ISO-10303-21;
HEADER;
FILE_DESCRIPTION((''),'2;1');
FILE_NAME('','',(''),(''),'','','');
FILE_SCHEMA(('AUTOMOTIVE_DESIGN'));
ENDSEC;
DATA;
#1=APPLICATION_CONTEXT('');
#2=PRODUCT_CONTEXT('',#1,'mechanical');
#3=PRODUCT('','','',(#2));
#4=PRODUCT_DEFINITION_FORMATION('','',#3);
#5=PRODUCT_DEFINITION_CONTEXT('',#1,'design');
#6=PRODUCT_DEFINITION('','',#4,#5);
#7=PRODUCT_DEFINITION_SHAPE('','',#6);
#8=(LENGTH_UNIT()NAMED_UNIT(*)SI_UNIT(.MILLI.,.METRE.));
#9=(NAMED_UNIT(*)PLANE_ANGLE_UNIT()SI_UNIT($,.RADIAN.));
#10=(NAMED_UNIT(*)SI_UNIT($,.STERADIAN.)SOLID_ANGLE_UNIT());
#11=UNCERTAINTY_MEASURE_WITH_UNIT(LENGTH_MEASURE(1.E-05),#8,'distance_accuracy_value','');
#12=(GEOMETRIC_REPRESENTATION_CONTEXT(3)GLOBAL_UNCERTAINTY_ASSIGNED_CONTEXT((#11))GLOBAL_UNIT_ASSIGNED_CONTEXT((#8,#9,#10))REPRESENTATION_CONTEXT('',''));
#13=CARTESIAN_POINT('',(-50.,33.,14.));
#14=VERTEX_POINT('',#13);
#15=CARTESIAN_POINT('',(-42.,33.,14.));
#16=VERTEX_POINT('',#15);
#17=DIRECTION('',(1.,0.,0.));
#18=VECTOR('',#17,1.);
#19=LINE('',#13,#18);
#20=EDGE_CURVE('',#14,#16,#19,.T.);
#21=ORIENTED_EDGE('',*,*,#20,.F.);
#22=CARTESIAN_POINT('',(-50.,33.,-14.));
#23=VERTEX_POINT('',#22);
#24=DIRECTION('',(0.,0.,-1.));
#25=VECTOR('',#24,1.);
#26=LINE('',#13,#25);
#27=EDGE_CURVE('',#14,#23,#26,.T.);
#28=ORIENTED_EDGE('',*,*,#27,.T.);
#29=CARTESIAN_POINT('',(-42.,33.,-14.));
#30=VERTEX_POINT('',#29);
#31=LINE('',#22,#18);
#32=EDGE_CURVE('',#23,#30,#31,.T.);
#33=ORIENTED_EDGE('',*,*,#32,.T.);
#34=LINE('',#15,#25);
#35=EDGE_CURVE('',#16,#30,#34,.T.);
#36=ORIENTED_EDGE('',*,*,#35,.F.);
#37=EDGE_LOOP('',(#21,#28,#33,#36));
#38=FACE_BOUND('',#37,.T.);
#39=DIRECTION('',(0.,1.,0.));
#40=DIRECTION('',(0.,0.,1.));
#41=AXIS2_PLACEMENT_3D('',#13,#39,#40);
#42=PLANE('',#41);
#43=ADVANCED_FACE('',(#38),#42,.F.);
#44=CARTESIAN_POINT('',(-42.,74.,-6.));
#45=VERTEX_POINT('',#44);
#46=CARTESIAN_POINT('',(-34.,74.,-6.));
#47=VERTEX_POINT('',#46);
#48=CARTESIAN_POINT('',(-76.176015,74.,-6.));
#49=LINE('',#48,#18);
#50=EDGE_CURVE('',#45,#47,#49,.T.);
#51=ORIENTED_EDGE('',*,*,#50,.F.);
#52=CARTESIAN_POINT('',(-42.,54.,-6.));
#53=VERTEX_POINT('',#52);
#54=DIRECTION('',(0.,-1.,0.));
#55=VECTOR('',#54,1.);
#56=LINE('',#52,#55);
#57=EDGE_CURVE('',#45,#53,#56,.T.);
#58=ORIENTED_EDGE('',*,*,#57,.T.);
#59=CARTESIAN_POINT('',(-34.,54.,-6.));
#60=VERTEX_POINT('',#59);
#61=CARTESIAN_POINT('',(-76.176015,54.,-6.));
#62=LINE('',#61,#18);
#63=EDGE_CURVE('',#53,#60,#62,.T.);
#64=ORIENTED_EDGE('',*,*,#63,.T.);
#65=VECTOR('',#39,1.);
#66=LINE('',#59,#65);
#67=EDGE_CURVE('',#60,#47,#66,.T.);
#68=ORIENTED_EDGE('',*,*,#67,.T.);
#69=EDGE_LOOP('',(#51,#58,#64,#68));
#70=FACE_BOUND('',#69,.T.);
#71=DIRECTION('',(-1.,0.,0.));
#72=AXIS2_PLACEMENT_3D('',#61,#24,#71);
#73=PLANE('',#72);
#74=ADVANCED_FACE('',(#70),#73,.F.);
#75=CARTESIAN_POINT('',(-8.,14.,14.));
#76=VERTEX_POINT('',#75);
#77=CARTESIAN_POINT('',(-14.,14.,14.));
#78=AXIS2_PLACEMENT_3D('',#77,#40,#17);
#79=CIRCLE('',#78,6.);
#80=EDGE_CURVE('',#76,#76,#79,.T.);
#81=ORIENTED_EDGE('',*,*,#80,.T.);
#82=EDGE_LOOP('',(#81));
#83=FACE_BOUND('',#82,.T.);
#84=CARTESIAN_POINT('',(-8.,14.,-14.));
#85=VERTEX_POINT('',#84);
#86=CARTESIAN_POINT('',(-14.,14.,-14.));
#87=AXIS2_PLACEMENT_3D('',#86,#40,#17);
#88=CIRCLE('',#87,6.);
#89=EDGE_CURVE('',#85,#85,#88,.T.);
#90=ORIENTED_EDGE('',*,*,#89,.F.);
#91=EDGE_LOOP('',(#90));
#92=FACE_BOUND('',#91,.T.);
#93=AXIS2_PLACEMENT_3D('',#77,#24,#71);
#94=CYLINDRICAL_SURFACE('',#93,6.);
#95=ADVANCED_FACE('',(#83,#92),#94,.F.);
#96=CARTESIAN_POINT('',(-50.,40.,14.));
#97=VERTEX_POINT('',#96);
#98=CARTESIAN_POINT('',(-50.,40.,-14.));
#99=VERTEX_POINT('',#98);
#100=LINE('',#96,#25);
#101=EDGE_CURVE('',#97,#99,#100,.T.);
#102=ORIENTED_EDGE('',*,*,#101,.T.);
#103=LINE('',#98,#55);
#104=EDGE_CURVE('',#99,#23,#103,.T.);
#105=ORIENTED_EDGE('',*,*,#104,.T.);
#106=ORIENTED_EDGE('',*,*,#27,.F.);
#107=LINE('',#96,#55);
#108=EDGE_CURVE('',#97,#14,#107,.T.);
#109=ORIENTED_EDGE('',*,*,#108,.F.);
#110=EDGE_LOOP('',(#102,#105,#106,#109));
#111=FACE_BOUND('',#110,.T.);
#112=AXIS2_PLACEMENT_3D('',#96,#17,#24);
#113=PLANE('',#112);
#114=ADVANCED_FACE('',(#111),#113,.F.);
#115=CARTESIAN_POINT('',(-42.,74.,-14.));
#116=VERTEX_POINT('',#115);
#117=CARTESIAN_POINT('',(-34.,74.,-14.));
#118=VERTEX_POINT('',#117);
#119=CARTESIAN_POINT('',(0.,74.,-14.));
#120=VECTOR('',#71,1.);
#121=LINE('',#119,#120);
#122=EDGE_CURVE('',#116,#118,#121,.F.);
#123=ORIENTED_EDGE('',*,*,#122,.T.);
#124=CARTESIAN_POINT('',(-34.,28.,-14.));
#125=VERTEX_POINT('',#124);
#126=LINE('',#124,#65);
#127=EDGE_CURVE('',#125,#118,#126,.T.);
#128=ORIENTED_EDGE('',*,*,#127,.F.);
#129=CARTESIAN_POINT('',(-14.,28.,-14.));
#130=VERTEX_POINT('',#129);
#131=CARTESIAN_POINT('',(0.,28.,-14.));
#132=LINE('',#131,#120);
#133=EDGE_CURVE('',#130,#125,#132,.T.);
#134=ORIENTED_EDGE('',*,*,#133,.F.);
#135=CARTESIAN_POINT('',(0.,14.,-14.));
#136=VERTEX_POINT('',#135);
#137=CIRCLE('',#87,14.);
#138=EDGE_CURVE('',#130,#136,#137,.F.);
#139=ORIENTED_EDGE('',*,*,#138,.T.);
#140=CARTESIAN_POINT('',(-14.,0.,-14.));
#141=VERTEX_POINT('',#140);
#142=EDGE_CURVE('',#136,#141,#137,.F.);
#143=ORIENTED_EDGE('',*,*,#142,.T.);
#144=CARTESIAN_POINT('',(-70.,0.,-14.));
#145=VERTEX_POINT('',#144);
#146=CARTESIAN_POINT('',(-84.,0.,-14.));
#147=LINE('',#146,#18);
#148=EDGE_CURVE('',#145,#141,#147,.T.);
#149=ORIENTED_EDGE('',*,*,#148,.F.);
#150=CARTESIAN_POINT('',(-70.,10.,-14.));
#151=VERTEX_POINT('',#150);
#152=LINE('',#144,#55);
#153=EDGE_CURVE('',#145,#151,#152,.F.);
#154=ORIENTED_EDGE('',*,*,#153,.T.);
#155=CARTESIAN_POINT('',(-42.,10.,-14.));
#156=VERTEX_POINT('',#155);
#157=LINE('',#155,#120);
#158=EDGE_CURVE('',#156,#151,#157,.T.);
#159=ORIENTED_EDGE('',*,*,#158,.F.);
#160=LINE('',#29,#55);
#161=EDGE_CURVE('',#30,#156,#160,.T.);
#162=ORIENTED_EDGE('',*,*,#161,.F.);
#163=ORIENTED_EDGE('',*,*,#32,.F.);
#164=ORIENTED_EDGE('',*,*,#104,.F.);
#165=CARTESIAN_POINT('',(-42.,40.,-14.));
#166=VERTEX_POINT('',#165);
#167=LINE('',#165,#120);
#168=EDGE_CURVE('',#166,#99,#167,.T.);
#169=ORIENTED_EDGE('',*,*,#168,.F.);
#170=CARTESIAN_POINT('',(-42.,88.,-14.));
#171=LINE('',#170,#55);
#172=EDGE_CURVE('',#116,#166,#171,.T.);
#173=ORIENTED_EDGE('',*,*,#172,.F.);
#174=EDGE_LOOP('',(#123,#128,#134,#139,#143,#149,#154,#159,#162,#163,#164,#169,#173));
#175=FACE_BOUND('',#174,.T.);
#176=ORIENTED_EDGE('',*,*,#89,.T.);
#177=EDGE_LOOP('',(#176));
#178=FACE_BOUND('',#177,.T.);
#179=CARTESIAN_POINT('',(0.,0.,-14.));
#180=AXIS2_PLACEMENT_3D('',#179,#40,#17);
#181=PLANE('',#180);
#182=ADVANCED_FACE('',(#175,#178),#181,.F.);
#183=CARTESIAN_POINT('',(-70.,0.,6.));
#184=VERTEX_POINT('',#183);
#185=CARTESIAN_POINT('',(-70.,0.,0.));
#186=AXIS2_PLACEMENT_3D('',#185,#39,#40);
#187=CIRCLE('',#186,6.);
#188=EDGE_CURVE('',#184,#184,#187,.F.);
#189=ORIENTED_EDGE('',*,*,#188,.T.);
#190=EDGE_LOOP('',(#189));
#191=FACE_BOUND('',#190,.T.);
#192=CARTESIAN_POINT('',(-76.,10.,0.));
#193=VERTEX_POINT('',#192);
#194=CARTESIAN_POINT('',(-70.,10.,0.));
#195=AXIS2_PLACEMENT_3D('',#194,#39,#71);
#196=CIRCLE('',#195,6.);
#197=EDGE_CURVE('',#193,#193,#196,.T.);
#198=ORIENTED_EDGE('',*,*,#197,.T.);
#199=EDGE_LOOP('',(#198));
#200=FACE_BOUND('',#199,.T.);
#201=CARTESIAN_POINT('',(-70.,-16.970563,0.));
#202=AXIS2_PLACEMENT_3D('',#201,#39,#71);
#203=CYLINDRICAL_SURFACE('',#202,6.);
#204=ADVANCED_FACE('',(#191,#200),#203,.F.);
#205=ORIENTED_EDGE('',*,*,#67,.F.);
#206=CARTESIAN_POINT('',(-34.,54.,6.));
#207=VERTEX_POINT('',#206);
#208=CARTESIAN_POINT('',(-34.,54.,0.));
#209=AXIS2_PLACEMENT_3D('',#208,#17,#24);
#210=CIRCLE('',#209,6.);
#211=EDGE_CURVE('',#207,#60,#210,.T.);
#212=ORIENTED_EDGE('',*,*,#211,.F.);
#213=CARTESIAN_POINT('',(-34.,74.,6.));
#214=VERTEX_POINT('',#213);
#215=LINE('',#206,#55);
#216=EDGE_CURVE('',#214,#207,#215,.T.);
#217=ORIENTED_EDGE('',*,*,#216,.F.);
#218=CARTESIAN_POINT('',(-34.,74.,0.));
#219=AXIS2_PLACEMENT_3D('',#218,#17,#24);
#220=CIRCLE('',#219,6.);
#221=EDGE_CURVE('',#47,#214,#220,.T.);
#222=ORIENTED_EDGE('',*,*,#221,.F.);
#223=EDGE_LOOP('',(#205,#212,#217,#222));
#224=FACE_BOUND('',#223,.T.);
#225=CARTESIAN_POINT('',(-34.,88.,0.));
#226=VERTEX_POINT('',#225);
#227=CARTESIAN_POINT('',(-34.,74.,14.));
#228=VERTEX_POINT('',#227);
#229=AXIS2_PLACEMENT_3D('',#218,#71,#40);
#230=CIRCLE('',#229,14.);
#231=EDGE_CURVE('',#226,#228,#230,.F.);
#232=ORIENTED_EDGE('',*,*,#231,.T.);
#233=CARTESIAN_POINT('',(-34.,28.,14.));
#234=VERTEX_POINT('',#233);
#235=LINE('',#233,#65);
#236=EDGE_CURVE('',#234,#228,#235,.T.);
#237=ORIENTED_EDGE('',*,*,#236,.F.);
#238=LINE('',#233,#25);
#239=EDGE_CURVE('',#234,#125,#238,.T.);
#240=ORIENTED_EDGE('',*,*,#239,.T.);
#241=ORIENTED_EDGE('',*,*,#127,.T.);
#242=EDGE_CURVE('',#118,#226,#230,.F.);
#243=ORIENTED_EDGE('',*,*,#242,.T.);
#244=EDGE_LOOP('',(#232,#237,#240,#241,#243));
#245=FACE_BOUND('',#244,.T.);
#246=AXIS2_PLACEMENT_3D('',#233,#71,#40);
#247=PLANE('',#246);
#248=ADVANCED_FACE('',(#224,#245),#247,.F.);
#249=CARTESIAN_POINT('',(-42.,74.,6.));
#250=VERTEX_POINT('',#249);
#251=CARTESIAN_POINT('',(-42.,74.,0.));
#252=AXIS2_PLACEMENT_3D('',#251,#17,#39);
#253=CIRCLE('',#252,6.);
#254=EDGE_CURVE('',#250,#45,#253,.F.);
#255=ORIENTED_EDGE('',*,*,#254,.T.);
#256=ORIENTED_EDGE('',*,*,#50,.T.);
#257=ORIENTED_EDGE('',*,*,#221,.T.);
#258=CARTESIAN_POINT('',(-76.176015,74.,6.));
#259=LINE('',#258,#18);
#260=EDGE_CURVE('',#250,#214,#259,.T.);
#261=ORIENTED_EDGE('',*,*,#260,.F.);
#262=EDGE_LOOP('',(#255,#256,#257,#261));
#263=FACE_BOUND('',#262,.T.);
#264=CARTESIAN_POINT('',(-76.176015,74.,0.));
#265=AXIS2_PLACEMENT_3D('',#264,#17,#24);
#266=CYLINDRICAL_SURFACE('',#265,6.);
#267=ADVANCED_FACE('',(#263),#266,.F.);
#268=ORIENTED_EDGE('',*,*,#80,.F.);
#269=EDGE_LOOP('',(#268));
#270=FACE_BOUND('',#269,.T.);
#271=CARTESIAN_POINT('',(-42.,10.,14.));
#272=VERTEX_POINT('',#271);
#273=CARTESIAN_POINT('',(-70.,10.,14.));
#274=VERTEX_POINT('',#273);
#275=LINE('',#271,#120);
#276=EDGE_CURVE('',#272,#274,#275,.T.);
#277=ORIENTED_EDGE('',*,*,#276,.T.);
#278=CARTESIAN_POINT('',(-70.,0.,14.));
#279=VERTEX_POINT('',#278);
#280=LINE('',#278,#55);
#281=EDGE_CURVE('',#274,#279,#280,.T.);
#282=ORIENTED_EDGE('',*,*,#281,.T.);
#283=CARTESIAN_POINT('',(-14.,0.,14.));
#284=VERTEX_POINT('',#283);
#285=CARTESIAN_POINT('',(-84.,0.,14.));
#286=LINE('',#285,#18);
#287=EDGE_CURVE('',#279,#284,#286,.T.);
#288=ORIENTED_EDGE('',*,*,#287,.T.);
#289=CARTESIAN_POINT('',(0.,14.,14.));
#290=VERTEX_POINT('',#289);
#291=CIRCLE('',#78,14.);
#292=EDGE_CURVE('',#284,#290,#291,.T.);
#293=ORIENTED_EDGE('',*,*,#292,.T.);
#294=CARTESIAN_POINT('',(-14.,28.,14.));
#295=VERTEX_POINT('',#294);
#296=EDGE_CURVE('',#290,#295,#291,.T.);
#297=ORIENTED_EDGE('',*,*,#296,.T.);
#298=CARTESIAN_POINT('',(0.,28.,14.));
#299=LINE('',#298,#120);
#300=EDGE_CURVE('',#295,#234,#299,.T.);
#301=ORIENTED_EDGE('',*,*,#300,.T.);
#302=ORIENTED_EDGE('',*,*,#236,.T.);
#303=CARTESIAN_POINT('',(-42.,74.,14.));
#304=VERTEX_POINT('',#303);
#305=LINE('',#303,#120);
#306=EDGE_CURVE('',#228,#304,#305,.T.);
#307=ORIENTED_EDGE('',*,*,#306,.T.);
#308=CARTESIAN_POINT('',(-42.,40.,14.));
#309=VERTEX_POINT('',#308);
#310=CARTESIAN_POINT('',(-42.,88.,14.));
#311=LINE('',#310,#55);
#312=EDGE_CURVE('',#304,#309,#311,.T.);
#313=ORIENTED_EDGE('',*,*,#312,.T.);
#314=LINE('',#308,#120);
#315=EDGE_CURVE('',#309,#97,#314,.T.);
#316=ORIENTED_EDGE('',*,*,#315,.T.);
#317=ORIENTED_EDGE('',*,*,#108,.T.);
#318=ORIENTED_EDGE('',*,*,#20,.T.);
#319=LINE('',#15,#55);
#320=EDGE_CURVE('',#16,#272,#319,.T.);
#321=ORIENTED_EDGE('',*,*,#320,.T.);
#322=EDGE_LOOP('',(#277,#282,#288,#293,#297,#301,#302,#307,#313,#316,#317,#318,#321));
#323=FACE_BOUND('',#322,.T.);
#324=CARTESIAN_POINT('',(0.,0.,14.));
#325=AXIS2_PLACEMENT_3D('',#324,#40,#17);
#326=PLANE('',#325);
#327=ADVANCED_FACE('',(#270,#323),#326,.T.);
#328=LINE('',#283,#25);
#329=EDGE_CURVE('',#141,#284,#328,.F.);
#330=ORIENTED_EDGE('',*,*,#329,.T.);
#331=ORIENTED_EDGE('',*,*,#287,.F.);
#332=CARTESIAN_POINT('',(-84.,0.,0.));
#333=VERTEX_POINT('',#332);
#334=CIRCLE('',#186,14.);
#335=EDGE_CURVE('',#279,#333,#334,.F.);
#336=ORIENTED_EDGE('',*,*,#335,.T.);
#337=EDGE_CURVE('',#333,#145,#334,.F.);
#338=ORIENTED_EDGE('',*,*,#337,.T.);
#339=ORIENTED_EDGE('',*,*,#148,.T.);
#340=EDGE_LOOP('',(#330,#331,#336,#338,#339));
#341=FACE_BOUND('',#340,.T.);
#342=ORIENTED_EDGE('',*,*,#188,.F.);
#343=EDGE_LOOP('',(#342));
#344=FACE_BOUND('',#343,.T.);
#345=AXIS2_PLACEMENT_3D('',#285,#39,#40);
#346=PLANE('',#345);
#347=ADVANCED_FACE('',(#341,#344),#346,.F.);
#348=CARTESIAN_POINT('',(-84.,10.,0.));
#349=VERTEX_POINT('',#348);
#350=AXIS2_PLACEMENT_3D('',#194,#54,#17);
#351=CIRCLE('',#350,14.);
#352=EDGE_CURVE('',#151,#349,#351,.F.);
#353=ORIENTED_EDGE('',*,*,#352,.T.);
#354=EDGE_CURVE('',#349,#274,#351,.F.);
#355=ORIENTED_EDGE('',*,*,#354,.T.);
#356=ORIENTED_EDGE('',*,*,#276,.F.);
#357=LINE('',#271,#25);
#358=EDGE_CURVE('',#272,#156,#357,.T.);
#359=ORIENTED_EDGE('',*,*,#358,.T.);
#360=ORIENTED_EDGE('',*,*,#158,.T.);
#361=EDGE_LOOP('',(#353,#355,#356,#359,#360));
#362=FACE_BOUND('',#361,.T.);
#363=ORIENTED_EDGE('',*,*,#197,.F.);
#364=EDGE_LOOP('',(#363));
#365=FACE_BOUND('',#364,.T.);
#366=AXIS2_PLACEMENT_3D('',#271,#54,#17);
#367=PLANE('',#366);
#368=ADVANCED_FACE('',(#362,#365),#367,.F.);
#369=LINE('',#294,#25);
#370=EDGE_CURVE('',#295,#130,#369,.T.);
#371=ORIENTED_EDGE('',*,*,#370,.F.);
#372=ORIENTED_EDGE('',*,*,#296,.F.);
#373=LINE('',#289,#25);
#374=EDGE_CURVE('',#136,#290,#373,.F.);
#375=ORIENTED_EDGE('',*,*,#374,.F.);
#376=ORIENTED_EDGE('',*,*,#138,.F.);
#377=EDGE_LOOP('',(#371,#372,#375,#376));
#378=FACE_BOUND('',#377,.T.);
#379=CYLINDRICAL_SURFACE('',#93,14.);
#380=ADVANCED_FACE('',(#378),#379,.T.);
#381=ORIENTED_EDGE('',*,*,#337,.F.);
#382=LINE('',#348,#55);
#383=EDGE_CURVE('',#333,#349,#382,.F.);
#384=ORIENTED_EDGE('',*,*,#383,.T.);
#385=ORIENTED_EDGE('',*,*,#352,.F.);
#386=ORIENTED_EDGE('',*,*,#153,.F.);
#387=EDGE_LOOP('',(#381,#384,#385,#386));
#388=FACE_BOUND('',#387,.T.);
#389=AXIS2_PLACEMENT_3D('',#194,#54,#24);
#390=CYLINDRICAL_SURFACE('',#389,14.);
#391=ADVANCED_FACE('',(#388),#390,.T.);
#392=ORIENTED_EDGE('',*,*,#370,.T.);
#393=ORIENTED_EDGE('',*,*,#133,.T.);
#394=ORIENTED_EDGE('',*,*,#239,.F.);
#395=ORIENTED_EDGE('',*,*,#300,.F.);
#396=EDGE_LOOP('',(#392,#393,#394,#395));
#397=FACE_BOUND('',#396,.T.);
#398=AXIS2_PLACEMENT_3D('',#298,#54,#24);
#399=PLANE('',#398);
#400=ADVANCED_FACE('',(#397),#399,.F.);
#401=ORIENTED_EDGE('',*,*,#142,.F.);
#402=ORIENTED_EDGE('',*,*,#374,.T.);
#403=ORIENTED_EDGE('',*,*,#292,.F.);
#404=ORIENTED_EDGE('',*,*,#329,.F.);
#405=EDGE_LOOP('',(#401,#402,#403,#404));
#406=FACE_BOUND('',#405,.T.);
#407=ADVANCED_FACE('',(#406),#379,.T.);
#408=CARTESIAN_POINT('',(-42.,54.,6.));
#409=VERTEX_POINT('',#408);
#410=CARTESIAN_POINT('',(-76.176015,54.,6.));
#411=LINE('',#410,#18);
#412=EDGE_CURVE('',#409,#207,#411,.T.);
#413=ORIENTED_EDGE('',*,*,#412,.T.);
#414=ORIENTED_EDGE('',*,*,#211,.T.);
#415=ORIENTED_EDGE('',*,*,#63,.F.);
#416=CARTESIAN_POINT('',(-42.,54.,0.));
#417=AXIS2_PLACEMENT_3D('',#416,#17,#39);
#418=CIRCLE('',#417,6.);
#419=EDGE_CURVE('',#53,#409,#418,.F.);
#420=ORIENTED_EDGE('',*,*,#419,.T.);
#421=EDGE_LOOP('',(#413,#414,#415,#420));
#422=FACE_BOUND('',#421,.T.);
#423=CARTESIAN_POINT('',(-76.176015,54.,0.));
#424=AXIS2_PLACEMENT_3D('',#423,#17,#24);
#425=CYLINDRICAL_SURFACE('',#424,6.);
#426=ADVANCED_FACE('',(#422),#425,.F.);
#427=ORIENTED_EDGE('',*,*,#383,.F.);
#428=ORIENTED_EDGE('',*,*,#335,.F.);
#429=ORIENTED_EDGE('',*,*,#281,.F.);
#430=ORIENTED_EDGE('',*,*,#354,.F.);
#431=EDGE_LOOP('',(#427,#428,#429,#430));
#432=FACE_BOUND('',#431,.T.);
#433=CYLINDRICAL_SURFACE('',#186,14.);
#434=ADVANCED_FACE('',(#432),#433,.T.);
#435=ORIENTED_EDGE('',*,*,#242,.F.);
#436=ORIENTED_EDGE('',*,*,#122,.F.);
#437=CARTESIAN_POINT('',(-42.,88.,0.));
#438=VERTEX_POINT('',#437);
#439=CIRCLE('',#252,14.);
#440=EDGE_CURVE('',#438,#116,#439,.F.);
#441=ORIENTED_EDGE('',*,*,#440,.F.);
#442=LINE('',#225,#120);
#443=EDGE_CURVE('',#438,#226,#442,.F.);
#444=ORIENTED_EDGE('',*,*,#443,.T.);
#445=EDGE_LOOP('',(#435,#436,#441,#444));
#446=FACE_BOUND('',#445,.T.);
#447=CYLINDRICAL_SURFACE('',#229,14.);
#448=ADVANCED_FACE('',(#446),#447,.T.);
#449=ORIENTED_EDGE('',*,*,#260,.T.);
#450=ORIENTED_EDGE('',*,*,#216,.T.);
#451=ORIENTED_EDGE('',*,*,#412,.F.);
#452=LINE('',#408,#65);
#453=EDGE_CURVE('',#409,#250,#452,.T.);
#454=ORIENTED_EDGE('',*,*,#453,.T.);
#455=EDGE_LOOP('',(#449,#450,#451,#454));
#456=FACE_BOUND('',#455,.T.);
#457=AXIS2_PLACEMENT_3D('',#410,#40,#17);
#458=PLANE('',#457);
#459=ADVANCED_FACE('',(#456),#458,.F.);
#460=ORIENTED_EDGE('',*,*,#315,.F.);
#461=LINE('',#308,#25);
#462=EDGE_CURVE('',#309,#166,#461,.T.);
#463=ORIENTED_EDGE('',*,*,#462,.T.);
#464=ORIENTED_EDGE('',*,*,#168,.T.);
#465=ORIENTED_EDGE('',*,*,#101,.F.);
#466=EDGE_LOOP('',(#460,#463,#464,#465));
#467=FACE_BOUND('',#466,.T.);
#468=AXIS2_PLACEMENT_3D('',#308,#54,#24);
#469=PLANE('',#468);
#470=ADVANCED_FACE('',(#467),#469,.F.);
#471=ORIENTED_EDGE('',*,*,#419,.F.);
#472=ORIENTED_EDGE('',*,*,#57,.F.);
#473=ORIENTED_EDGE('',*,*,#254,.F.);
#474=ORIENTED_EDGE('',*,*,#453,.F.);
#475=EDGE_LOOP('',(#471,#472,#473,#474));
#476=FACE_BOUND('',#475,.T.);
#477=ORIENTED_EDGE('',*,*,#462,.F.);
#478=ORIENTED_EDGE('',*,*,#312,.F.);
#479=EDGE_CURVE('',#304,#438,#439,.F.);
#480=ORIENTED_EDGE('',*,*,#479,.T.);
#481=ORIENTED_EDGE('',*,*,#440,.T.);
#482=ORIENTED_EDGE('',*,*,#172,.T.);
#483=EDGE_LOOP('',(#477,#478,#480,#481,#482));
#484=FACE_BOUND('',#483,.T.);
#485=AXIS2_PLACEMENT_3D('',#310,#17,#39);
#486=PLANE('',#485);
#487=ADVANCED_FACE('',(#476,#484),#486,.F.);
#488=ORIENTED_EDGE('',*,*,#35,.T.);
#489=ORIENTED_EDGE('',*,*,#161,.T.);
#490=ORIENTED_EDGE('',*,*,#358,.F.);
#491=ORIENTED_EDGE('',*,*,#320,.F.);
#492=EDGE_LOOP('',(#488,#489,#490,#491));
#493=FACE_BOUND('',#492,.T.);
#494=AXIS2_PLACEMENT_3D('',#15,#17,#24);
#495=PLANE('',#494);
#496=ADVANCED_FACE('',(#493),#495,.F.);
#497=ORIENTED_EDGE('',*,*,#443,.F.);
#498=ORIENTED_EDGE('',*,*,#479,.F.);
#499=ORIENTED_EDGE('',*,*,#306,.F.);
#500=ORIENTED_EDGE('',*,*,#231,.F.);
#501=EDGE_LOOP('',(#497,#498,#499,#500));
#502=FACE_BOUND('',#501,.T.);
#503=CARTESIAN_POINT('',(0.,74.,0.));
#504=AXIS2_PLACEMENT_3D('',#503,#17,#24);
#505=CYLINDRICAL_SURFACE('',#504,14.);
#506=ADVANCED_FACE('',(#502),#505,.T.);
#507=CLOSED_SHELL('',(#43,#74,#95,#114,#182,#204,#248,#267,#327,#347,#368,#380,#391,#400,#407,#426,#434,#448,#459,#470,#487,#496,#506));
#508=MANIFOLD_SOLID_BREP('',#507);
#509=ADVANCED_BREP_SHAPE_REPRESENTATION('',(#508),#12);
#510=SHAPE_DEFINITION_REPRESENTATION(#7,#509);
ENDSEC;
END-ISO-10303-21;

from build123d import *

# Parameters (mm, degrees)
SKETCH2_R           = 6
BOSS_EXTRUDE1_DEPTH = 14
CUT_EXTRUDE1_DEPTH  = 8
SKETCH4_R           = 6
CUT_EXTRUDE2_DEPTH  = 10
FILLET1_R           = 14


with BuildPart() as part:
    # Sketch2 → Boss-Extrude1 (new, symmetric)
    with BuildSketch(Plane.XY):
        Polygon((0, 0), (0, 28), (-34, 28), (-34, 88), (-42, 88), (-42, 40), (-50, 40), (-50, 33), (-42, 33), (-42, 10), (-84, 10), (-84, 0), align=None)
        with Locations((-14, 14)):
            Circle(SKETCH2_R, mode=Mode.SUBTRACT)
    extrude(amount=BOSS_EXTRUDE1_DEPTH, both=True)

    # Sketch3 → Cut-Extrude1 (cut)
    with BuildSketch(Plane(origin=(-34, 0, 0), x_dir=(0, 0, -1), z_dir=(1, 0, 0))):
        with BuildLine():
            Line((-6, 54), (-6, 74))
            ThreePointArc((-6, 74), (0, 80), (6, 74))
            Line((6, 74), (6, 54))
            ThreePointArc((6, 54), (0, 48), (-6, 54))
        make_face()
    extrude(amount=-CUT_EXTRUDE1_DEPTH, mode=Mode.SUBTRACT)

    # Sketch4 → Cut-Extrude2 (cut)
    with BuildSketch(Plane(origin=(0, 10, 0), x_dir=(1, 0, 0), z_dir=(0, 1, 0))):
        with Locations(Location((-70, 0, 0), (0, 0, 180))):
            Circle(SKETCH4_R)
    extrude(amount=-CUT_EXTRUDE2_DEPTH, mode=Mode.SUBTRACT)

    # Fillet1
    fillet1_edges = [part.edges().sort_by_distance(p)[0] for p in [
        (-84, 5, -14),
        (-84, 5, 14),
        (-38, 88, -14),
        (-38, 88, 14),
        (0, 0, 0),
        (0, 28, 0),
    ]]
    fillet(fillet1_edges, radius=FILLET1_R - 0.0001)  # a hair under: the kernel refuses the full size


solid = part.part
